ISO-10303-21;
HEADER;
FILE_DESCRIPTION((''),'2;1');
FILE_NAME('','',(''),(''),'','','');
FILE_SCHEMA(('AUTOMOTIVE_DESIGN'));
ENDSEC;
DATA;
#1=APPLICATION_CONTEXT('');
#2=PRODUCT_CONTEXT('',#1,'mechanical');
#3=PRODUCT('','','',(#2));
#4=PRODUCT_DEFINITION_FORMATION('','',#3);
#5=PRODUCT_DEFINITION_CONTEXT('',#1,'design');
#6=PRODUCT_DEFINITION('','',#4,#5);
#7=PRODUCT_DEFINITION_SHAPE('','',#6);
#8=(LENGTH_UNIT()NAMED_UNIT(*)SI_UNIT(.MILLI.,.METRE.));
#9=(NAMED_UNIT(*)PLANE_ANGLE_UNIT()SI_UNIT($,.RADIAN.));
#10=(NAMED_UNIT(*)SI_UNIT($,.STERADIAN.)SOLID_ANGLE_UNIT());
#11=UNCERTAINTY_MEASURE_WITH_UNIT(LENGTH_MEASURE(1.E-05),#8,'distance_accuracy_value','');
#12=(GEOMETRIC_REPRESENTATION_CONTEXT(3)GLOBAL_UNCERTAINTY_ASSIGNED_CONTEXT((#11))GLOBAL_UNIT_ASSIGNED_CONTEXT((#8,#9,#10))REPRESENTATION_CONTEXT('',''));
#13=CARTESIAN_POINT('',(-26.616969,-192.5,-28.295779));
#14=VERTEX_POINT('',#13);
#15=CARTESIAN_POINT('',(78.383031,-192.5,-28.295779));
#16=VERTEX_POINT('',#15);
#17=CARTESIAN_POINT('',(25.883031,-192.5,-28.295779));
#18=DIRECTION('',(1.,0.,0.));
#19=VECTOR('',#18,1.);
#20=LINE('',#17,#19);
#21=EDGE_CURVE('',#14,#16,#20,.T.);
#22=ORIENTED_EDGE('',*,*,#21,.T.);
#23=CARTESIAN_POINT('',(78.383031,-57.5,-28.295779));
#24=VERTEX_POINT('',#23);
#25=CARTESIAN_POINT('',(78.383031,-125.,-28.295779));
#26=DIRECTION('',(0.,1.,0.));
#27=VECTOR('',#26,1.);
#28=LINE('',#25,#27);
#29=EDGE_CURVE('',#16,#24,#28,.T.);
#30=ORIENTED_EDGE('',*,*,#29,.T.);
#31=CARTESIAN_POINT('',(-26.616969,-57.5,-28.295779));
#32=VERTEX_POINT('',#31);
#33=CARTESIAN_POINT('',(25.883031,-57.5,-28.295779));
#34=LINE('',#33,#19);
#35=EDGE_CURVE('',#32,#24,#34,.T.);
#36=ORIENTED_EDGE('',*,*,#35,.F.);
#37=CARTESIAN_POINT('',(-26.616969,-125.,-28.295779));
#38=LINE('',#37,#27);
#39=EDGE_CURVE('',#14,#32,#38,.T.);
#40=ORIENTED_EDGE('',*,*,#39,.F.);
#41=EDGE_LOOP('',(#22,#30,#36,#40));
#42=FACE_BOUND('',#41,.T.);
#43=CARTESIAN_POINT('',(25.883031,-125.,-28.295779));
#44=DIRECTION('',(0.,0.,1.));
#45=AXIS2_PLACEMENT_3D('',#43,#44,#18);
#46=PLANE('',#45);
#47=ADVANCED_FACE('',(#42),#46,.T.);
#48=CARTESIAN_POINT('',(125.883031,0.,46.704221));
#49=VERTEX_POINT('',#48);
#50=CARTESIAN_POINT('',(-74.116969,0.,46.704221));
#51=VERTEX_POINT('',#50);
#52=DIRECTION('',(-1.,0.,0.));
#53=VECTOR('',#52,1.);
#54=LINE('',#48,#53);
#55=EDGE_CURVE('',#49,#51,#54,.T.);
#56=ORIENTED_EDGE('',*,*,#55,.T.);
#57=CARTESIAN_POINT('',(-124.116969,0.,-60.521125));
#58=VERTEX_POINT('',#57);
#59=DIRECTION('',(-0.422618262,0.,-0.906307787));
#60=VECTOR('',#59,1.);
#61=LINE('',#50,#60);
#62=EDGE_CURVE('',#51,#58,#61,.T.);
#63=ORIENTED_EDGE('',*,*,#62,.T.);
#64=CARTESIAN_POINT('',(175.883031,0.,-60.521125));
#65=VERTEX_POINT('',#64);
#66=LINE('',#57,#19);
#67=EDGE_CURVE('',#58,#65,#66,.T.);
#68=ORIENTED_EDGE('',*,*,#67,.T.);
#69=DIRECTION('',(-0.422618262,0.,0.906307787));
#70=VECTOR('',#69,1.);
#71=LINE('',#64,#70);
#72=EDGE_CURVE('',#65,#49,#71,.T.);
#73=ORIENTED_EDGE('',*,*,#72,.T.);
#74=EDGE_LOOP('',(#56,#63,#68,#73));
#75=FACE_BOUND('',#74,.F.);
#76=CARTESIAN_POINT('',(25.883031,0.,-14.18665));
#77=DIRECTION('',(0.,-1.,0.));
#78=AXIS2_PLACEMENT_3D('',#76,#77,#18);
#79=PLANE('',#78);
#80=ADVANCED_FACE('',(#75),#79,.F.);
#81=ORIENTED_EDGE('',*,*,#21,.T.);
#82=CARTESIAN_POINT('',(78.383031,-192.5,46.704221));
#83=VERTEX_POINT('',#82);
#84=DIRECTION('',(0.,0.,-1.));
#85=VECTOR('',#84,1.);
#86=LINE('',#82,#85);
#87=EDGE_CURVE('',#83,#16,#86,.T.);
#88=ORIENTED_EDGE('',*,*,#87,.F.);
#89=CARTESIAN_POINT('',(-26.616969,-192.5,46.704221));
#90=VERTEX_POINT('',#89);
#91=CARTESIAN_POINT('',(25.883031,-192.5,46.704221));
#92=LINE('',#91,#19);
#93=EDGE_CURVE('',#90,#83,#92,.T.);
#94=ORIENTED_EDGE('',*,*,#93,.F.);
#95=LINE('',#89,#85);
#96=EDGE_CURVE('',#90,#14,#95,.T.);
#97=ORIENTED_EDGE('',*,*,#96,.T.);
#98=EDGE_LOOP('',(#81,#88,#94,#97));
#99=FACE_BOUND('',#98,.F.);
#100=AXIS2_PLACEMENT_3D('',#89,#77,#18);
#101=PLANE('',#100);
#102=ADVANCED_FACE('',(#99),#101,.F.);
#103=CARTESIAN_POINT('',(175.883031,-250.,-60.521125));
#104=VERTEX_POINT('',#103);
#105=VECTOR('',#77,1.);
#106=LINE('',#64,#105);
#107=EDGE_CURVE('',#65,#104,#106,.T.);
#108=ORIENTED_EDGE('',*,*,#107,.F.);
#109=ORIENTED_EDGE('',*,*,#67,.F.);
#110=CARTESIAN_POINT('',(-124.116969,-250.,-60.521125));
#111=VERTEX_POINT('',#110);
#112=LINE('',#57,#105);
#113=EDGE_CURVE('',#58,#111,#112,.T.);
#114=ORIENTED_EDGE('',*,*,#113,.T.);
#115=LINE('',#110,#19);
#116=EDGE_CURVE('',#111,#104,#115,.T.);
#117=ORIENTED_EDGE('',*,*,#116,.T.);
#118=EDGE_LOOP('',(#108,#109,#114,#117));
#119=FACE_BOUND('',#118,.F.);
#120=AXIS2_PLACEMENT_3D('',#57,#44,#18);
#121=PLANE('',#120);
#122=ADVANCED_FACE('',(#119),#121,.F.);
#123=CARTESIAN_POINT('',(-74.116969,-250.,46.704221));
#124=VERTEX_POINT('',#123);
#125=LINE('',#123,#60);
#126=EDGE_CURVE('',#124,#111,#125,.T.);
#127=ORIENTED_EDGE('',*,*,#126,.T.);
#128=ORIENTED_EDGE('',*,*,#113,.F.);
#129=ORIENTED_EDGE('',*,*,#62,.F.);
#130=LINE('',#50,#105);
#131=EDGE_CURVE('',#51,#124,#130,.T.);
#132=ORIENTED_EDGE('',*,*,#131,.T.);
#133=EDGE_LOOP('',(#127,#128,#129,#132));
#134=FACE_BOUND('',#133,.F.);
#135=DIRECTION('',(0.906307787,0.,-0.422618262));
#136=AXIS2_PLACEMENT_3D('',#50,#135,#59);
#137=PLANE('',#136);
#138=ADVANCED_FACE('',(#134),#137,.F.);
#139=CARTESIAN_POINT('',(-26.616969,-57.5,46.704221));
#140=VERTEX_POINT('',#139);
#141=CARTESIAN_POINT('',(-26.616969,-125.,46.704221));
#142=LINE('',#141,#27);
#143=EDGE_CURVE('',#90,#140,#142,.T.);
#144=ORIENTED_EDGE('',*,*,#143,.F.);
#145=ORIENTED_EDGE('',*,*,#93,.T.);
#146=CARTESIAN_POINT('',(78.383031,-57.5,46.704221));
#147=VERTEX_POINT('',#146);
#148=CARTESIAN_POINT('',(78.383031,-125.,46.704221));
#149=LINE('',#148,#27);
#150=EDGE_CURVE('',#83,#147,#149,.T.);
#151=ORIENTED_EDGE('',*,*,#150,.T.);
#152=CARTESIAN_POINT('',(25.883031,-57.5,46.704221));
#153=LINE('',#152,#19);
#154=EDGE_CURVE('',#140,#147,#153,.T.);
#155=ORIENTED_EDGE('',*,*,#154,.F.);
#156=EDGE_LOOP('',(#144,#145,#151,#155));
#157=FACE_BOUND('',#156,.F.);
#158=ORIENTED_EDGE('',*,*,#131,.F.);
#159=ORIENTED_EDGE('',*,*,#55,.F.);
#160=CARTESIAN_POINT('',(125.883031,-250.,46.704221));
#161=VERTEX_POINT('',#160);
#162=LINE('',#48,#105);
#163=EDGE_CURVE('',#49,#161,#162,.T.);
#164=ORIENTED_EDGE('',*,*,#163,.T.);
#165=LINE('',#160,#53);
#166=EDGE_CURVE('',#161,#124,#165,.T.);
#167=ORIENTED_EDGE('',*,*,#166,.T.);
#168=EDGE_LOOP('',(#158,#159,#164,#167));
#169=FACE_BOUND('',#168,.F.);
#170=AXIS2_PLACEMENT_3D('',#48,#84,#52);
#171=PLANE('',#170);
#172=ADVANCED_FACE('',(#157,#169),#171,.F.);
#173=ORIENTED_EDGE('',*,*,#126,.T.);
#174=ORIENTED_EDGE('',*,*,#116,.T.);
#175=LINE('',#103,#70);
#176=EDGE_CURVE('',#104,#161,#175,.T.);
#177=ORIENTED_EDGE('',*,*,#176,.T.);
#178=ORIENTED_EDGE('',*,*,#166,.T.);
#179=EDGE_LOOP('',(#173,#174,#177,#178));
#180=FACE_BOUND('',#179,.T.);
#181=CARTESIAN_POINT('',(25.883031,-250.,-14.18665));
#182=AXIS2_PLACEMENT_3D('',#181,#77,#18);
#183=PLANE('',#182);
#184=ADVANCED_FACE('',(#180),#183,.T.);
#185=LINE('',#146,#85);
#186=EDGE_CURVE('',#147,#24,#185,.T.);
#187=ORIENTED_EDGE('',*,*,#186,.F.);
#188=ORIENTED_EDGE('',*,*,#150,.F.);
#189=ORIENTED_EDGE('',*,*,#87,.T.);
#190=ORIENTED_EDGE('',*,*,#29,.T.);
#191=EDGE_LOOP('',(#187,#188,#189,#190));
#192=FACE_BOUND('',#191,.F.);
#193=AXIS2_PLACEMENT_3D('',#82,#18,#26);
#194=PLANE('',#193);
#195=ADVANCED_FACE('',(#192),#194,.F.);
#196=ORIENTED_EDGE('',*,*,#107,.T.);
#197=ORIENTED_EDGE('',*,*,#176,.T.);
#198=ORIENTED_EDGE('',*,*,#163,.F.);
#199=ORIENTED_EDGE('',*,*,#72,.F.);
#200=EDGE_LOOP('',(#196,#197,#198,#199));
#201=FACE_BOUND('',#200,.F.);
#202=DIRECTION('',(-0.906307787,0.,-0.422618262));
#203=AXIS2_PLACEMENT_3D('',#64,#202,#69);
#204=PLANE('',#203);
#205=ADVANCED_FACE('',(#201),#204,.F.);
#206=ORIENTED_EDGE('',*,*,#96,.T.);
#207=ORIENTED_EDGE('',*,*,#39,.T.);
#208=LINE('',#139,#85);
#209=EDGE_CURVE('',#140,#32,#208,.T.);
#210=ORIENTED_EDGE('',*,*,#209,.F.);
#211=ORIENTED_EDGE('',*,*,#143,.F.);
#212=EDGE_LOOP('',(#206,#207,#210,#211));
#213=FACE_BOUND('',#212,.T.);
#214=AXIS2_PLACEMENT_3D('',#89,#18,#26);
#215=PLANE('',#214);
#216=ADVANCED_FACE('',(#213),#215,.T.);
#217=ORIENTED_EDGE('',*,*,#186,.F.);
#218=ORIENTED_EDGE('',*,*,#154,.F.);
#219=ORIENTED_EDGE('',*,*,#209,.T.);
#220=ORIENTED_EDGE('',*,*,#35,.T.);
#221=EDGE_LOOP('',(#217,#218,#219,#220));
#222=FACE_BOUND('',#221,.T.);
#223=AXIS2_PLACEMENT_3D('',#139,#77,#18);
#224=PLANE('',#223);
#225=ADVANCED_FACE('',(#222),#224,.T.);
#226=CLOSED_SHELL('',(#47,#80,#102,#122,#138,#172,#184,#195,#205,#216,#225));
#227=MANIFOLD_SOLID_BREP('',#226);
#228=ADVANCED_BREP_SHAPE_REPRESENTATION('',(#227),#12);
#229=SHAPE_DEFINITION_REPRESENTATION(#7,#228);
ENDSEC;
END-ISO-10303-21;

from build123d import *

# Parameters (mm, degrees)
F1_DEPTH = 250
F2_W     = 105
F2_H     = 135
F3_DEPTH = 75


# Not quite as in the source:
# - a feature names something its author has since deleted; it is built from what else it names


with BuildPart() as f1:
    # F0 (on Front) → F1 (new body)
    with BuildSketch(Plane.XZ):
        Polygon((-74.1169694188, 46.7042212901), (-124.1169694188, -60.5211247353), (175.8830305812, -60.5211247353), (125.8830305812, 46.7042212901), align=None)
    extrude(amount=F1_DEPTH)

    # F2 (on face) → F3 (cut)
    with BuildSketch(Plane.XY.offset(46.7042212901)):
        with Locations((25.8830305812, -125)):
            Rectangle(F2_W, F2_H)
    extrude(amount=-F3_DEPTH, mode=Mode.SUBTRACT)


solid = f1.part
